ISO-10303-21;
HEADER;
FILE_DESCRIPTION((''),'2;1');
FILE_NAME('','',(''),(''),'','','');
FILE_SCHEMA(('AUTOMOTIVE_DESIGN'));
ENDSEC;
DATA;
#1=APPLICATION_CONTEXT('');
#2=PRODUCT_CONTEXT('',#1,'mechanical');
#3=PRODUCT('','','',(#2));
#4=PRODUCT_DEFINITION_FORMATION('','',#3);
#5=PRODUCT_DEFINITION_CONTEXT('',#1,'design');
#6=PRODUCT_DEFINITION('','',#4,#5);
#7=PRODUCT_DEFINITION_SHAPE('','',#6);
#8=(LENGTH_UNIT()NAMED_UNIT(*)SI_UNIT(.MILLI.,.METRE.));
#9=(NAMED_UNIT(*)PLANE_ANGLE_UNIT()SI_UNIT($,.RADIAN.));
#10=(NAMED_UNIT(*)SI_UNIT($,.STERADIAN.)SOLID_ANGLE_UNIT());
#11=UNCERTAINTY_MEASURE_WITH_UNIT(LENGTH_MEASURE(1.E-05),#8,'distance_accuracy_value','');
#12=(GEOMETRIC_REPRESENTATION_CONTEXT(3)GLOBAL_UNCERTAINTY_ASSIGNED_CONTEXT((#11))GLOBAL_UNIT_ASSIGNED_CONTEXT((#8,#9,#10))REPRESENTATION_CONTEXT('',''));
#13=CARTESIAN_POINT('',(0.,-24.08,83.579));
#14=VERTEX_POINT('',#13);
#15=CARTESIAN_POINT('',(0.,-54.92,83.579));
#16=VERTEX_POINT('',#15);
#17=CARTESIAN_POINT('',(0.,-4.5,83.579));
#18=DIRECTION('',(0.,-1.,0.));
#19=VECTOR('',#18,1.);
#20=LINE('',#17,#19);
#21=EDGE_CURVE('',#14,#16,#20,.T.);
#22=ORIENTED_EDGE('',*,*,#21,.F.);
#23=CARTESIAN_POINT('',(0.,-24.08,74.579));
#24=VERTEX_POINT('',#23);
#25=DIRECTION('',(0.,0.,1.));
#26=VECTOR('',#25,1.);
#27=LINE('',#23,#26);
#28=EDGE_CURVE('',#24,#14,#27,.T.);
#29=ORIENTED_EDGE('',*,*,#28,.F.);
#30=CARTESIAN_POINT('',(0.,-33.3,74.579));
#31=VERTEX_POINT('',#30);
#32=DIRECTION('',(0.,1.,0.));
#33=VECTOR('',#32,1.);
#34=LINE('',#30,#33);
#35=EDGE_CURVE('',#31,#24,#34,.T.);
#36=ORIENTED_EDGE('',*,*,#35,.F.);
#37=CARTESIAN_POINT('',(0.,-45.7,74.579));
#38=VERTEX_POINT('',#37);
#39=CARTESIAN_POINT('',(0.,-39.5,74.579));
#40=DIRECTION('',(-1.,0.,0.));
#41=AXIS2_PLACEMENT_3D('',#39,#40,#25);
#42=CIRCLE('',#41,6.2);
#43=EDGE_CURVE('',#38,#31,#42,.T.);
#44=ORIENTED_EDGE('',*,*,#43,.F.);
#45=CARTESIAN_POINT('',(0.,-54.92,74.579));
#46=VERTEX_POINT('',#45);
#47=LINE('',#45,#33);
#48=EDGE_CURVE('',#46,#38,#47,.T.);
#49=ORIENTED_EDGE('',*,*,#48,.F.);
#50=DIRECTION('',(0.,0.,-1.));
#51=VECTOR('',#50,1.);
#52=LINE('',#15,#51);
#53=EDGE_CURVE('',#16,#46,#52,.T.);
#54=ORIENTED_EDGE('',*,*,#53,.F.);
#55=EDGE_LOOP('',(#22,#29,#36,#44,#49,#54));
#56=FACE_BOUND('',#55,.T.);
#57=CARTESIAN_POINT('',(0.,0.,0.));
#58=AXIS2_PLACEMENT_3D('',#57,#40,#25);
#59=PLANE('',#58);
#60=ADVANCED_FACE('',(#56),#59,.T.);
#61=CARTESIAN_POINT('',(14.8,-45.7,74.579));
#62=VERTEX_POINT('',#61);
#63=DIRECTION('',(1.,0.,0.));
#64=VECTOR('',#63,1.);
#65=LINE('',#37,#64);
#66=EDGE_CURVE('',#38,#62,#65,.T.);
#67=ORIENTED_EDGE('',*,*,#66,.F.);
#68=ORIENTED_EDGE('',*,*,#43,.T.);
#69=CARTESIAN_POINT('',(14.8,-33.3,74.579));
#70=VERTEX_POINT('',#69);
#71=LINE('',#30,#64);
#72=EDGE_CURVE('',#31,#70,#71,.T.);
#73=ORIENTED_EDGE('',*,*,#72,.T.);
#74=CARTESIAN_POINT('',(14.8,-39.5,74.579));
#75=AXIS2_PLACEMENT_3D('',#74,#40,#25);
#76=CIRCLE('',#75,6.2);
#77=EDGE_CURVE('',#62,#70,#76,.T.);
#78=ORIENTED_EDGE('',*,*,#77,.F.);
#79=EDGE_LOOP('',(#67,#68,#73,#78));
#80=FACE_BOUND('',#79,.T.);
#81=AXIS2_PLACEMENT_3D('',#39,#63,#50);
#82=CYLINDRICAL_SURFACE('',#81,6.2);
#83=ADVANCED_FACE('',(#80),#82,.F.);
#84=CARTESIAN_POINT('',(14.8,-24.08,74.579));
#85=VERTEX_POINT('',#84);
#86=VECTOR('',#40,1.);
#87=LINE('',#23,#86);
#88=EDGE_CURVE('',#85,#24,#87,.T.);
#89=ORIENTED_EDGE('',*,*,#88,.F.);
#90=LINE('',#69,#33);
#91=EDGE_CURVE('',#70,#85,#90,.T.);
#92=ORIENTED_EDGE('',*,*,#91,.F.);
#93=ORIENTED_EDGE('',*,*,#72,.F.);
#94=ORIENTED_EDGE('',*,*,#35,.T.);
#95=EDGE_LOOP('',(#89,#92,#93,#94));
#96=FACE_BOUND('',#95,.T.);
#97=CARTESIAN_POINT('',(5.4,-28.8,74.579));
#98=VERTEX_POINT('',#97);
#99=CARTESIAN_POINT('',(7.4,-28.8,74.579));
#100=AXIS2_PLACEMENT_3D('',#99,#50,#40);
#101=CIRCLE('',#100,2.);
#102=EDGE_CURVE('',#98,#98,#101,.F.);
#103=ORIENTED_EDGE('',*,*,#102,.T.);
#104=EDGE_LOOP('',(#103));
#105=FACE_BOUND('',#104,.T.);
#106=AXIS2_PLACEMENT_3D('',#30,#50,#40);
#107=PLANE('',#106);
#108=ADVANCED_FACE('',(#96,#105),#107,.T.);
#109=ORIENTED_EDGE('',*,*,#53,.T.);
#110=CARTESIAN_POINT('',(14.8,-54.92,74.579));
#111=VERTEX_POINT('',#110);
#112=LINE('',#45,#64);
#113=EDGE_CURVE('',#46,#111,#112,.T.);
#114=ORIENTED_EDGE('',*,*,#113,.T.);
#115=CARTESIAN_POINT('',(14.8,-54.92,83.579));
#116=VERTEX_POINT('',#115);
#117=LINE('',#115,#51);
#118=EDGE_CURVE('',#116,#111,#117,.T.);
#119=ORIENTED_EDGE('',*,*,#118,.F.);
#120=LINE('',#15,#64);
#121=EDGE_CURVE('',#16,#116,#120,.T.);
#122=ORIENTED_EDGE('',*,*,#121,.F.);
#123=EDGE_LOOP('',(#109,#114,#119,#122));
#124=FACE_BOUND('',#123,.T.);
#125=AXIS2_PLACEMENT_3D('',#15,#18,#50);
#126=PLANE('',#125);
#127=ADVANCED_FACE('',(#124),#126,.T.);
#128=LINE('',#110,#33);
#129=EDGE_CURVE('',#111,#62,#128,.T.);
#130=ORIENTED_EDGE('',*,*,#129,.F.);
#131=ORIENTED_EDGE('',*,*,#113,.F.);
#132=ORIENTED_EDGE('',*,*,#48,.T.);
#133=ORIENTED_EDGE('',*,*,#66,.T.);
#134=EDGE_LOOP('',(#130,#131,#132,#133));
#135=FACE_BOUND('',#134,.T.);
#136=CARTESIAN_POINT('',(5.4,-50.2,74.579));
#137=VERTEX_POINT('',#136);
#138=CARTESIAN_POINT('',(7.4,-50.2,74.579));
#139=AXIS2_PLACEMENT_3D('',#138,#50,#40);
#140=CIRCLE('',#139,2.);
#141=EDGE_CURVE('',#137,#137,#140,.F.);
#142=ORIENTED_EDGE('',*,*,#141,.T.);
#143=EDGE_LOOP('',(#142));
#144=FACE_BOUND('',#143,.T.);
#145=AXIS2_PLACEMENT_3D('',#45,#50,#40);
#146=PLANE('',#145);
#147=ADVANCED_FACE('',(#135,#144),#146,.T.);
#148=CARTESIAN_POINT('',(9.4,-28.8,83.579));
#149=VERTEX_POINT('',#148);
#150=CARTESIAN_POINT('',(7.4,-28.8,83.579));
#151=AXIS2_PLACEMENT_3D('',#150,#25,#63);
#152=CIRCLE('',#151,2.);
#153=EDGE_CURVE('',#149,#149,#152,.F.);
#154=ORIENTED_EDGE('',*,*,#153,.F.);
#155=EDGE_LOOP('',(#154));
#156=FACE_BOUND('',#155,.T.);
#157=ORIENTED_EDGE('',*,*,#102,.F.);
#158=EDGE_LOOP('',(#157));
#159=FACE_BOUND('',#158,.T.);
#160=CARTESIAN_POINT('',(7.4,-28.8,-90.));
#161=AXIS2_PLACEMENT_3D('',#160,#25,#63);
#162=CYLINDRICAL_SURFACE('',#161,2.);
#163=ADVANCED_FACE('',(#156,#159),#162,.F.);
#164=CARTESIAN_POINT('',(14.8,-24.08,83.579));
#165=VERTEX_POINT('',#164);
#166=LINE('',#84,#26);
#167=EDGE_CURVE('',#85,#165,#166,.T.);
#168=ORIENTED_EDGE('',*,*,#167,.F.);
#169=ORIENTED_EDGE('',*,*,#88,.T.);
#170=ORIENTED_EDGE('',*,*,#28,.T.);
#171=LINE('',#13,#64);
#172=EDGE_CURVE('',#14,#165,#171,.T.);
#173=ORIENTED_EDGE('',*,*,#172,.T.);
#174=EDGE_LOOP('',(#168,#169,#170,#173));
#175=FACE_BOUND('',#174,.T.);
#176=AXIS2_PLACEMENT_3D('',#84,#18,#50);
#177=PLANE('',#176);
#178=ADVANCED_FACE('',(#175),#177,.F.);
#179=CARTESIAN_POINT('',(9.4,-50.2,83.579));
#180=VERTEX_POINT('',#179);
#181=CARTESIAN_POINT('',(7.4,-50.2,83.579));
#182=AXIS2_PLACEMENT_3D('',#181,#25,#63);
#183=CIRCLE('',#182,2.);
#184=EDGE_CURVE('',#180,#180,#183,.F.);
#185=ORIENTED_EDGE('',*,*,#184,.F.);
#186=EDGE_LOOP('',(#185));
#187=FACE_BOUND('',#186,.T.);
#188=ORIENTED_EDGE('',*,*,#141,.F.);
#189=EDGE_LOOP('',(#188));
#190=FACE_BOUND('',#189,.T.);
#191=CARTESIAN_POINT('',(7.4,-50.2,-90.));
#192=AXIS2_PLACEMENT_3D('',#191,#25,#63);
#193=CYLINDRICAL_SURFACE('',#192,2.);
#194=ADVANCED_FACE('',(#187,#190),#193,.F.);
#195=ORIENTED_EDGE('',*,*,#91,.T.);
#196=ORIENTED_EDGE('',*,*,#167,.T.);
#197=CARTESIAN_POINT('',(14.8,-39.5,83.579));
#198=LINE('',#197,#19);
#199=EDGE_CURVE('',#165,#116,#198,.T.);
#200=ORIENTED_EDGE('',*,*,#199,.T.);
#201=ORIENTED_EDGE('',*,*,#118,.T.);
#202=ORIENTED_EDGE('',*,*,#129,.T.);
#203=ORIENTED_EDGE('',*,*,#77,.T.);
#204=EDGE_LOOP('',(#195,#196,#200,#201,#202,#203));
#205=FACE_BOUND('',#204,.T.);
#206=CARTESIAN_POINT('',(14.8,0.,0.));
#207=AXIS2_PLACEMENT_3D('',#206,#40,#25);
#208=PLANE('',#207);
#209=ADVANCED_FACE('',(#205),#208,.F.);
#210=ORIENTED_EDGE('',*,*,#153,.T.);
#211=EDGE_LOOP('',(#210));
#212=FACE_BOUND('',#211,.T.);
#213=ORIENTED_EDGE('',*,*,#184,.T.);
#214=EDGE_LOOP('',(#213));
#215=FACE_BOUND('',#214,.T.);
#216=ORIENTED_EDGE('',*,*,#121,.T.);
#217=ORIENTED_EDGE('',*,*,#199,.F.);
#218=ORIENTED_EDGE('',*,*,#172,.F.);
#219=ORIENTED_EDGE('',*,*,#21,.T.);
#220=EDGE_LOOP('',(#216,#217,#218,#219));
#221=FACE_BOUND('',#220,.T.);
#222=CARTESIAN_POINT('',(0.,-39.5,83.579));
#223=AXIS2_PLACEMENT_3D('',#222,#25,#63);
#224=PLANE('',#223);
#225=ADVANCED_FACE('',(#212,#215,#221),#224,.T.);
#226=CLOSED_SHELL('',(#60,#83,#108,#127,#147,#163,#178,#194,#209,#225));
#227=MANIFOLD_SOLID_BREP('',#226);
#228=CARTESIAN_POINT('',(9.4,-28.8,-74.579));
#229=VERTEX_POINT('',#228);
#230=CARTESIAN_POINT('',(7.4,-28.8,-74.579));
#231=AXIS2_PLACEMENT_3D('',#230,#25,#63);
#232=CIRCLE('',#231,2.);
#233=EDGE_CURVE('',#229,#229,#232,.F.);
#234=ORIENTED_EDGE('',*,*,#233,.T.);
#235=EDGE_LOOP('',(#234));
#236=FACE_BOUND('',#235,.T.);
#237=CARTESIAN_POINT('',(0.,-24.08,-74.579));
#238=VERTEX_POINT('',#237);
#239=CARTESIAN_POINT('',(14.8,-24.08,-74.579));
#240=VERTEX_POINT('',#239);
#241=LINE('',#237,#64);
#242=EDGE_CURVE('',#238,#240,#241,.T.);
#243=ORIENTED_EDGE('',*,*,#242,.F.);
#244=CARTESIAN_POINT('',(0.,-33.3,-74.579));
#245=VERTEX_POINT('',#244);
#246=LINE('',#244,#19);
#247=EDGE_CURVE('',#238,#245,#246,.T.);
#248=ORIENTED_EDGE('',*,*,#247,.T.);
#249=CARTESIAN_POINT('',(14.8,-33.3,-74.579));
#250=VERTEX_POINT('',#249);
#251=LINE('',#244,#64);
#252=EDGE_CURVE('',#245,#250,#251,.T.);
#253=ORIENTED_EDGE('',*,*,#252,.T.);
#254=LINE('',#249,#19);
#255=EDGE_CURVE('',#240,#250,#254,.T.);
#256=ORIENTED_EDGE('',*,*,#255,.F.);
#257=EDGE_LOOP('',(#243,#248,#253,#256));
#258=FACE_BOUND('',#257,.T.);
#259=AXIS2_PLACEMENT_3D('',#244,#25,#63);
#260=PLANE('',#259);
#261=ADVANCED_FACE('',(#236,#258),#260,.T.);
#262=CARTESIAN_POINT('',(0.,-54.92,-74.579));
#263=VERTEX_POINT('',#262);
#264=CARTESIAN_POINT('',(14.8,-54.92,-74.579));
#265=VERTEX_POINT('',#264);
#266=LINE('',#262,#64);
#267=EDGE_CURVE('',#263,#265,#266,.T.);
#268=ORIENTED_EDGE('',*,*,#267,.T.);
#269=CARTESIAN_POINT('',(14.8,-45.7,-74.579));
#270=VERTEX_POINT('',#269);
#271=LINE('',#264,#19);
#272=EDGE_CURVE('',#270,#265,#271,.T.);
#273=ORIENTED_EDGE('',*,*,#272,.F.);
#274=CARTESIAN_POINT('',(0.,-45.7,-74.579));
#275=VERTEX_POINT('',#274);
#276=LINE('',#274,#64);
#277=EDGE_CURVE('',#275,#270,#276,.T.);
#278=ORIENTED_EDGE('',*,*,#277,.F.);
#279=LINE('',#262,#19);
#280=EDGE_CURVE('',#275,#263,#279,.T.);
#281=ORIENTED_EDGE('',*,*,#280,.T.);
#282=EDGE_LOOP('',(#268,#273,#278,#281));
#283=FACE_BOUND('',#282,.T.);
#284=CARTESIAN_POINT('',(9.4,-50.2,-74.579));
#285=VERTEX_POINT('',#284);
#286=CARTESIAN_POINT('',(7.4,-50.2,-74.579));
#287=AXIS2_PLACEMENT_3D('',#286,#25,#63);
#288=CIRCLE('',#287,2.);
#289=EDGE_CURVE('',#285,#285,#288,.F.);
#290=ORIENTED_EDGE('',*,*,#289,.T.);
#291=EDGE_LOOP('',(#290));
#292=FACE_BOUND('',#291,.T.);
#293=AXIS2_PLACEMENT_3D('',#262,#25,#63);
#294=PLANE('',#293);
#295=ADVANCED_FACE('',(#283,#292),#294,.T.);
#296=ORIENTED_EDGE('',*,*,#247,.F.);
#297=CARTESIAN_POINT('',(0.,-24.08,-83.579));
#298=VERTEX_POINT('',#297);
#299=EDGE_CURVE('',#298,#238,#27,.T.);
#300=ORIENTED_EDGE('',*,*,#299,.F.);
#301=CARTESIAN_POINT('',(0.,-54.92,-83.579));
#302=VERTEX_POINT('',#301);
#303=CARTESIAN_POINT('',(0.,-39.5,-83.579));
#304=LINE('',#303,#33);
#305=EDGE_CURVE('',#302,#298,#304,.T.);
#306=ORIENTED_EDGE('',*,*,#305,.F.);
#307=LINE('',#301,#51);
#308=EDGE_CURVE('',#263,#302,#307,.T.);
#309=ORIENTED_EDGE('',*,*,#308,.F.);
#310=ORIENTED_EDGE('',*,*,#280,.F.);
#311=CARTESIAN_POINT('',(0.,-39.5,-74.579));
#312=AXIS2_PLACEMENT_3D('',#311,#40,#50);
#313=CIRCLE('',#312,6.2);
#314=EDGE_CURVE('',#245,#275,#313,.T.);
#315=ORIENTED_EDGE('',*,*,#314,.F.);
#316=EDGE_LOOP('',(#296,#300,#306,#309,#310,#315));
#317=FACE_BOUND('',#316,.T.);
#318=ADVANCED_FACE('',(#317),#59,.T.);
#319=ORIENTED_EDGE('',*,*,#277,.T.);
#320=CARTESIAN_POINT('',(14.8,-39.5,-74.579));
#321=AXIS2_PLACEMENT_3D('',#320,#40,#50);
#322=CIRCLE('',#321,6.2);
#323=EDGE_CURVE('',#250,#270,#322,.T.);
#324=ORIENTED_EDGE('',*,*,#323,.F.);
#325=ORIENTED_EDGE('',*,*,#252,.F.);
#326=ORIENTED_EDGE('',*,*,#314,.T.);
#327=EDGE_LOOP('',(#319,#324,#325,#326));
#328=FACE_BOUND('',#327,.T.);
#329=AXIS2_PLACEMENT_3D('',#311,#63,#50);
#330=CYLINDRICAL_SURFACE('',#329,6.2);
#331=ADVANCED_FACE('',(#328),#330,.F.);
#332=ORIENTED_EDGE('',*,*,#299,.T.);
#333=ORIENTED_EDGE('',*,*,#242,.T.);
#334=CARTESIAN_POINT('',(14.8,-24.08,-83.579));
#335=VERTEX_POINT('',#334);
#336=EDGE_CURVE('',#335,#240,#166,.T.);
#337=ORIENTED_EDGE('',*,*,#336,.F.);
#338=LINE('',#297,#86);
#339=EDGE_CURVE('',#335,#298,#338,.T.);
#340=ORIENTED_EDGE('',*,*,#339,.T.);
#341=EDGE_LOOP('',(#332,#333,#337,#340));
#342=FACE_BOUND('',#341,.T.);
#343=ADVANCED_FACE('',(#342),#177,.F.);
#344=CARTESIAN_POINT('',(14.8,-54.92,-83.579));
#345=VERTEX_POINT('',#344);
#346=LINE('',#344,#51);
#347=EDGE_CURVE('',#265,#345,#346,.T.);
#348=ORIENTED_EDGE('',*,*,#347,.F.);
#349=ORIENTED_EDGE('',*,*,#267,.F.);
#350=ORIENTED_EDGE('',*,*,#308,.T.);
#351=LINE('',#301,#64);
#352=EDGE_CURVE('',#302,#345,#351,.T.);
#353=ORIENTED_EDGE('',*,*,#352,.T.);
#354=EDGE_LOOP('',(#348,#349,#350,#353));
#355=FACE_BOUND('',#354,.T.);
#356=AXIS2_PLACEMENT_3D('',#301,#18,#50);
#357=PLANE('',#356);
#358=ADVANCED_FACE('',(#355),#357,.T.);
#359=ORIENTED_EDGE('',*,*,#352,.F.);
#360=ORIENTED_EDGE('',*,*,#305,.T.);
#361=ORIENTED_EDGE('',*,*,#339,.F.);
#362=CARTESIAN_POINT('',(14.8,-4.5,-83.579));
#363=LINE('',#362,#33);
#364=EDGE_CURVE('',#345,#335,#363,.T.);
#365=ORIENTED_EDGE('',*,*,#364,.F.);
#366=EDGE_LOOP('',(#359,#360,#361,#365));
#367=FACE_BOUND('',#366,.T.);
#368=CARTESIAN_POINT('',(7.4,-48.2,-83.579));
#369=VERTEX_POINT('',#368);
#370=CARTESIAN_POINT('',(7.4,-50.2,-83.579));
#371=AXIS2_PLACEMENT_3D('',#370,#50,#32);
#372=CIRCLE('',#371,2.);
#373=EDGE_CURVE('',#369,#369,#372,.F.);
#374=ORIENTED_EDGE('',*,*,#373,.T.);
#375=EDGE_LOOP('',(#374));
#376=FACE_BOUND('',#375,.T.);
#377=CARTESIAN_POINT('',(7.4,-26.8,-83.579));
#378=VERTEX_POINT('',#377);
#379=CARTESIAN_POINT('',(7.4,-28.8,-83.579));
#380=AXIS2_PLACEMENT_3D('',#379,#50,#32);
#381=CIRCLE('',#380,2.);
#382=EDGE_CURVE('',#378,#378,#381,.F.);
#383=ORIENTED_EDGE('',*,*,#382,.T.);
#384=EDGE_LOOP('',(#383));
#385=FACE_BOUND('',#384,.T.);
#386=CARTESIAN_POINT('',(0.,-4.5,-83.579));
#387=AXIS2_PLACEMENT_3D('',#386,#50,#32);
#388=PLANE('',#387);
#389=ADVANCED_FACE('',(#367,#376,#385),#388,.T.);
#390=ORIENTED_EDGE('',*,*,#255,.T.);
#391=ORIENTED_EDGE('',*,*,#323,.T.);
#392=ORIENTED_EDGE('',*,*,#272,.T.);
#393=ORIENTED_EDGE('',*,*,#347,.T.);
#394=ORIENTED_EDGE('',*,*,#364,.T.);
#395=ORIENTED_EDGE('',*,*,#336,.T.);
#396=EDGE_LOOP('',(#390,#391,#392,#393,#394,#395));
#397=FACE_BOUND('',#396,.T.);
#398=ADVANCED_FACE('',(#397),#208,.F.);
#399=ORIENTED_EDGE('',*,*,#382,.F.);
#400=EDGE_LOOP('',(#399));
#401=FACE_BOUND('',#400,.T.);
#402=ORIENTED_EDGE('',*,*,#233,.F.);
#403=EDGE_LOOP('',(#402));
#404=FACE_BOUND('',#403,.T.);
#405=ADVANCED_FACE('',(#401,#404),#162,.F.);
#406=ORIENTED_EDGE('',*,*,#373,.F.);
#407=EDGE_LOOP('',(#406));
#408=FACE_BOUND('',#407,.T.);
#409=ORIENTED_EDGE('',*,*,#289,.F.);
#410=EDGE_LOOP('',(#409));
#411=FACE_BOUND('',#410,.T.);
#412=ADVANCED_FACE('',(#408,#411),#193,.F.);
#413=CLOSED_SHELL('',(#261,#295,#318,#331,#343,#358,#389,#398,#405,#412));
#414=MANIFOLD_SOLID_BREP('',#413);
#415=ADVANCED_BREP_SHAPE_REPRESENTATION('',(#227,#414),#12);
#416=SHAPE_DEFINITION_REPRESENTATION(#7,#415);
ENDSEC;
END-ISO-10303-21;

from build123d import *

# Parameters (mm, degrees)
SKETCH2_W               = 180
SKETCH2_H               = 9
BOSS_EXTRUDE1_DEPTH     = 14.8
SKETCH7_W               = 90
SKETCH7_H               = 4.5
CUT_EXTRUDE1_DEPTH      = 92.319713096
FILLET1_R               = 8
BOSS_EXTRUDE2_DEPTH     = 14.8
CUT_EXTRUDE2_DEPTH      = 175.130679781
CUT_EXTRUDE2_DEPTH_BACK = 175.130679781
SKETCH11_R              = 2
CUT_EXTRUDE3_DEPTH      = 107.467114171
CUT_EXTRUDE3_DEPTH_BACK = 107.467114171


with BuildPart() as part:
    # Sketch2 → Boss-Extrude1 (new body)
    with BuildSketch(Plane(origin=(0, 0, 0), x_dir=(0, 0, -1), z_dir=(1, 0, 0))):
        Rectangle(SKETCH2_W, SKETCH2_H)
    extrude(amount=BOSS_EXTRUDE1_DEPTH)

    # Sketch7 → Cut-Extrude1 (cut, through all)
    with BuildSketch(Plane(origin=(14.8, 0, 0), x_dir=(0, 0, -1), z_dir=(1, 0, 0))):
        with Locations((0, -2.25)):
            Rectangle(SKETCH7_W, SKETCH7_H)
    extrude(amount=-CUT_EXTRUDE1_DEPTH, mode=Mode.SUBTRACT)

    # Fillet1
    # the kernel refuses this fillet: 8 mm, written as the material it adds along each edge
    with BuildSketch(Plane(origin=(14.8, 0, -45), x_dir=(0, -1, 0), z_dir=(-1, 0, 0))) as fillet1_piece_1:
        with BuildLine():
            CenterArc((8, 7.193747285), FILLET1_R, 180, 64.055520228)
            Line((0, 7.193747285), (-0.16, 7.193747285))
            Line((-0.16, 7.193747285), (-0.16, 0))
            Line((-0.16, 0), (0, -0.16))
            ThreePointArc((0, -0.16), (2.25, -0.16), (4.43, -0.143874946))
            Line((4.43, -0.143874946), (4.5, 0))
        make_face()
    extrude(amount=14.8)
    with BuildSketch(Plane(origin=(14.8, 0, 45), x_dir=(0, -1, 0), z_dir=(-1, 0, 0))) as fillet1_piece_2:
        with BuildLine():
            CenterArc((8, -7.193747285), FILLET1_R, 115.944479772, 64.055520228)
            Line((0, -7.193747285), (-0.16, -7.193747285))
            Line((-0.16, -7.193747285), (-0.16, 0))
            Line((-0.16, 0), (0, 0.16))
            ThreePointArc((0, 0.16), (2.25, 0.16), (4.43, 0.143874946))
            Line((4.43, 0.143874946), (4.5, 0))
        make_face()
    extrude(amount=14.8)

    # Sketch8 → Boss-Extrude2 (add)
    with BuildSketch(Plane(origin=(14.8, 0, 0), x_dir=(0, 0, -1), z_dir=(1, 0, 0))):
        with BuildLine():
            Line((83.579, -39.5), (83.579, -54.92))
            Line((83.579, -54.92), (74.579, -54.92))
            Line((74.579, -54.92), (74.579, -45.7))
            ThreePointArc((74.579, -45.7), (80.779, -39.5), (74.579, -33.3))
            Line((74.579, -33.3), (74.579, -4.5))
            Line((74.579, -4.5), (83.579, -4.5))
            Line((83.579, -4.5), (83.579, -39.5))
        make_face()
        with BuildLine():
            Line((-74.579, -54.92), (-74.579, -45.7))
            ThreePointArc((-74.579, -45.7), (-80.779, -39.5), (-74.579, -33.3))
            Line((-74.579, -33.3), (-74.579, -4.5))
            Line((-74.579, -4.5), (-83.579, -4.5))
            Line((-83.579, -4.5), (-83.579, -39.5))
            Line((-83.579, -39.5), (-83.579, -54.92))
            Line((-83.579, -54.92), (-74.579, -54.92))
        make_face()
    extrude(amount=-BOSS_EXTRUDE2_DEPTH)

    # Sketch11 → Cut-Extrude2 (cut, two sides: drawn at the far end of the back side and taken through both)
    with BuildSketch(Plane(origin=(0, 0, 74.579), x_dir=(-1, 0, 0), z_dir=(0, 0, -1)).offset(-CUT_EXTRUDE2_DEPTH_BACK)):
        with Locations(Location((-7.4, -28.8, 0), (0, 0, 180))):
            Circle(SKETCH11_R)
        with Locations(Location((-7.4, -50.2, 0), (0, 0, 180))):
            Circle(SKETCH11_R)
    extrude(amount=CUT_EXTRUDE2_DEPTH + CUT_EXTRUDE2_DEPTH_BACK, mode=Mode.SUBTRACT)

    # Sketch12 → Cut-Extrude3 (cut, two sides: drawn at the far end of the back side and taken through both)
    with BuildSketch(Plane.ZY.offset(-CUT_EXTRUDE3_DEPTH_BACK)):
        Polygon((96.986162818, 8.741450318), (-95.153164269, 8.741450318), (-95.153164269, -16.038890922), (-95.153164269, -24.08), (74.579, -24.08), (96.986162818, -24.08), (96.986162818, -16.038890922), (96.986162818, -4.5), align=None)
    extrude(amount=CUT_EXTRUDE3_DEPTH + CUT_EXTRUDE3_DEPTH_BACK, mode=Mode.SUBTRACT)


with BuildPart() as cut_extrude3_piece_1:
    # of the separate pieces the step leaves, piece 1, a body of its own (cut_extrude3_pieces)
    add(part.part.solids().sort_by_distance((14.8, -24.08, -83.579))[0])


with BuildPart() as cut_extrude3_piece_2:
    # of the separate pieces the step leaves, piece 2, a body of its own (cut_extrude3_pieces)
    add(part.part.solids().sort_by_distance((14.8, -33.3, 74.579))[0])


solid = Compound([cut_extrude3_piece_1.part, cut_extrude3_piece_2.part])
